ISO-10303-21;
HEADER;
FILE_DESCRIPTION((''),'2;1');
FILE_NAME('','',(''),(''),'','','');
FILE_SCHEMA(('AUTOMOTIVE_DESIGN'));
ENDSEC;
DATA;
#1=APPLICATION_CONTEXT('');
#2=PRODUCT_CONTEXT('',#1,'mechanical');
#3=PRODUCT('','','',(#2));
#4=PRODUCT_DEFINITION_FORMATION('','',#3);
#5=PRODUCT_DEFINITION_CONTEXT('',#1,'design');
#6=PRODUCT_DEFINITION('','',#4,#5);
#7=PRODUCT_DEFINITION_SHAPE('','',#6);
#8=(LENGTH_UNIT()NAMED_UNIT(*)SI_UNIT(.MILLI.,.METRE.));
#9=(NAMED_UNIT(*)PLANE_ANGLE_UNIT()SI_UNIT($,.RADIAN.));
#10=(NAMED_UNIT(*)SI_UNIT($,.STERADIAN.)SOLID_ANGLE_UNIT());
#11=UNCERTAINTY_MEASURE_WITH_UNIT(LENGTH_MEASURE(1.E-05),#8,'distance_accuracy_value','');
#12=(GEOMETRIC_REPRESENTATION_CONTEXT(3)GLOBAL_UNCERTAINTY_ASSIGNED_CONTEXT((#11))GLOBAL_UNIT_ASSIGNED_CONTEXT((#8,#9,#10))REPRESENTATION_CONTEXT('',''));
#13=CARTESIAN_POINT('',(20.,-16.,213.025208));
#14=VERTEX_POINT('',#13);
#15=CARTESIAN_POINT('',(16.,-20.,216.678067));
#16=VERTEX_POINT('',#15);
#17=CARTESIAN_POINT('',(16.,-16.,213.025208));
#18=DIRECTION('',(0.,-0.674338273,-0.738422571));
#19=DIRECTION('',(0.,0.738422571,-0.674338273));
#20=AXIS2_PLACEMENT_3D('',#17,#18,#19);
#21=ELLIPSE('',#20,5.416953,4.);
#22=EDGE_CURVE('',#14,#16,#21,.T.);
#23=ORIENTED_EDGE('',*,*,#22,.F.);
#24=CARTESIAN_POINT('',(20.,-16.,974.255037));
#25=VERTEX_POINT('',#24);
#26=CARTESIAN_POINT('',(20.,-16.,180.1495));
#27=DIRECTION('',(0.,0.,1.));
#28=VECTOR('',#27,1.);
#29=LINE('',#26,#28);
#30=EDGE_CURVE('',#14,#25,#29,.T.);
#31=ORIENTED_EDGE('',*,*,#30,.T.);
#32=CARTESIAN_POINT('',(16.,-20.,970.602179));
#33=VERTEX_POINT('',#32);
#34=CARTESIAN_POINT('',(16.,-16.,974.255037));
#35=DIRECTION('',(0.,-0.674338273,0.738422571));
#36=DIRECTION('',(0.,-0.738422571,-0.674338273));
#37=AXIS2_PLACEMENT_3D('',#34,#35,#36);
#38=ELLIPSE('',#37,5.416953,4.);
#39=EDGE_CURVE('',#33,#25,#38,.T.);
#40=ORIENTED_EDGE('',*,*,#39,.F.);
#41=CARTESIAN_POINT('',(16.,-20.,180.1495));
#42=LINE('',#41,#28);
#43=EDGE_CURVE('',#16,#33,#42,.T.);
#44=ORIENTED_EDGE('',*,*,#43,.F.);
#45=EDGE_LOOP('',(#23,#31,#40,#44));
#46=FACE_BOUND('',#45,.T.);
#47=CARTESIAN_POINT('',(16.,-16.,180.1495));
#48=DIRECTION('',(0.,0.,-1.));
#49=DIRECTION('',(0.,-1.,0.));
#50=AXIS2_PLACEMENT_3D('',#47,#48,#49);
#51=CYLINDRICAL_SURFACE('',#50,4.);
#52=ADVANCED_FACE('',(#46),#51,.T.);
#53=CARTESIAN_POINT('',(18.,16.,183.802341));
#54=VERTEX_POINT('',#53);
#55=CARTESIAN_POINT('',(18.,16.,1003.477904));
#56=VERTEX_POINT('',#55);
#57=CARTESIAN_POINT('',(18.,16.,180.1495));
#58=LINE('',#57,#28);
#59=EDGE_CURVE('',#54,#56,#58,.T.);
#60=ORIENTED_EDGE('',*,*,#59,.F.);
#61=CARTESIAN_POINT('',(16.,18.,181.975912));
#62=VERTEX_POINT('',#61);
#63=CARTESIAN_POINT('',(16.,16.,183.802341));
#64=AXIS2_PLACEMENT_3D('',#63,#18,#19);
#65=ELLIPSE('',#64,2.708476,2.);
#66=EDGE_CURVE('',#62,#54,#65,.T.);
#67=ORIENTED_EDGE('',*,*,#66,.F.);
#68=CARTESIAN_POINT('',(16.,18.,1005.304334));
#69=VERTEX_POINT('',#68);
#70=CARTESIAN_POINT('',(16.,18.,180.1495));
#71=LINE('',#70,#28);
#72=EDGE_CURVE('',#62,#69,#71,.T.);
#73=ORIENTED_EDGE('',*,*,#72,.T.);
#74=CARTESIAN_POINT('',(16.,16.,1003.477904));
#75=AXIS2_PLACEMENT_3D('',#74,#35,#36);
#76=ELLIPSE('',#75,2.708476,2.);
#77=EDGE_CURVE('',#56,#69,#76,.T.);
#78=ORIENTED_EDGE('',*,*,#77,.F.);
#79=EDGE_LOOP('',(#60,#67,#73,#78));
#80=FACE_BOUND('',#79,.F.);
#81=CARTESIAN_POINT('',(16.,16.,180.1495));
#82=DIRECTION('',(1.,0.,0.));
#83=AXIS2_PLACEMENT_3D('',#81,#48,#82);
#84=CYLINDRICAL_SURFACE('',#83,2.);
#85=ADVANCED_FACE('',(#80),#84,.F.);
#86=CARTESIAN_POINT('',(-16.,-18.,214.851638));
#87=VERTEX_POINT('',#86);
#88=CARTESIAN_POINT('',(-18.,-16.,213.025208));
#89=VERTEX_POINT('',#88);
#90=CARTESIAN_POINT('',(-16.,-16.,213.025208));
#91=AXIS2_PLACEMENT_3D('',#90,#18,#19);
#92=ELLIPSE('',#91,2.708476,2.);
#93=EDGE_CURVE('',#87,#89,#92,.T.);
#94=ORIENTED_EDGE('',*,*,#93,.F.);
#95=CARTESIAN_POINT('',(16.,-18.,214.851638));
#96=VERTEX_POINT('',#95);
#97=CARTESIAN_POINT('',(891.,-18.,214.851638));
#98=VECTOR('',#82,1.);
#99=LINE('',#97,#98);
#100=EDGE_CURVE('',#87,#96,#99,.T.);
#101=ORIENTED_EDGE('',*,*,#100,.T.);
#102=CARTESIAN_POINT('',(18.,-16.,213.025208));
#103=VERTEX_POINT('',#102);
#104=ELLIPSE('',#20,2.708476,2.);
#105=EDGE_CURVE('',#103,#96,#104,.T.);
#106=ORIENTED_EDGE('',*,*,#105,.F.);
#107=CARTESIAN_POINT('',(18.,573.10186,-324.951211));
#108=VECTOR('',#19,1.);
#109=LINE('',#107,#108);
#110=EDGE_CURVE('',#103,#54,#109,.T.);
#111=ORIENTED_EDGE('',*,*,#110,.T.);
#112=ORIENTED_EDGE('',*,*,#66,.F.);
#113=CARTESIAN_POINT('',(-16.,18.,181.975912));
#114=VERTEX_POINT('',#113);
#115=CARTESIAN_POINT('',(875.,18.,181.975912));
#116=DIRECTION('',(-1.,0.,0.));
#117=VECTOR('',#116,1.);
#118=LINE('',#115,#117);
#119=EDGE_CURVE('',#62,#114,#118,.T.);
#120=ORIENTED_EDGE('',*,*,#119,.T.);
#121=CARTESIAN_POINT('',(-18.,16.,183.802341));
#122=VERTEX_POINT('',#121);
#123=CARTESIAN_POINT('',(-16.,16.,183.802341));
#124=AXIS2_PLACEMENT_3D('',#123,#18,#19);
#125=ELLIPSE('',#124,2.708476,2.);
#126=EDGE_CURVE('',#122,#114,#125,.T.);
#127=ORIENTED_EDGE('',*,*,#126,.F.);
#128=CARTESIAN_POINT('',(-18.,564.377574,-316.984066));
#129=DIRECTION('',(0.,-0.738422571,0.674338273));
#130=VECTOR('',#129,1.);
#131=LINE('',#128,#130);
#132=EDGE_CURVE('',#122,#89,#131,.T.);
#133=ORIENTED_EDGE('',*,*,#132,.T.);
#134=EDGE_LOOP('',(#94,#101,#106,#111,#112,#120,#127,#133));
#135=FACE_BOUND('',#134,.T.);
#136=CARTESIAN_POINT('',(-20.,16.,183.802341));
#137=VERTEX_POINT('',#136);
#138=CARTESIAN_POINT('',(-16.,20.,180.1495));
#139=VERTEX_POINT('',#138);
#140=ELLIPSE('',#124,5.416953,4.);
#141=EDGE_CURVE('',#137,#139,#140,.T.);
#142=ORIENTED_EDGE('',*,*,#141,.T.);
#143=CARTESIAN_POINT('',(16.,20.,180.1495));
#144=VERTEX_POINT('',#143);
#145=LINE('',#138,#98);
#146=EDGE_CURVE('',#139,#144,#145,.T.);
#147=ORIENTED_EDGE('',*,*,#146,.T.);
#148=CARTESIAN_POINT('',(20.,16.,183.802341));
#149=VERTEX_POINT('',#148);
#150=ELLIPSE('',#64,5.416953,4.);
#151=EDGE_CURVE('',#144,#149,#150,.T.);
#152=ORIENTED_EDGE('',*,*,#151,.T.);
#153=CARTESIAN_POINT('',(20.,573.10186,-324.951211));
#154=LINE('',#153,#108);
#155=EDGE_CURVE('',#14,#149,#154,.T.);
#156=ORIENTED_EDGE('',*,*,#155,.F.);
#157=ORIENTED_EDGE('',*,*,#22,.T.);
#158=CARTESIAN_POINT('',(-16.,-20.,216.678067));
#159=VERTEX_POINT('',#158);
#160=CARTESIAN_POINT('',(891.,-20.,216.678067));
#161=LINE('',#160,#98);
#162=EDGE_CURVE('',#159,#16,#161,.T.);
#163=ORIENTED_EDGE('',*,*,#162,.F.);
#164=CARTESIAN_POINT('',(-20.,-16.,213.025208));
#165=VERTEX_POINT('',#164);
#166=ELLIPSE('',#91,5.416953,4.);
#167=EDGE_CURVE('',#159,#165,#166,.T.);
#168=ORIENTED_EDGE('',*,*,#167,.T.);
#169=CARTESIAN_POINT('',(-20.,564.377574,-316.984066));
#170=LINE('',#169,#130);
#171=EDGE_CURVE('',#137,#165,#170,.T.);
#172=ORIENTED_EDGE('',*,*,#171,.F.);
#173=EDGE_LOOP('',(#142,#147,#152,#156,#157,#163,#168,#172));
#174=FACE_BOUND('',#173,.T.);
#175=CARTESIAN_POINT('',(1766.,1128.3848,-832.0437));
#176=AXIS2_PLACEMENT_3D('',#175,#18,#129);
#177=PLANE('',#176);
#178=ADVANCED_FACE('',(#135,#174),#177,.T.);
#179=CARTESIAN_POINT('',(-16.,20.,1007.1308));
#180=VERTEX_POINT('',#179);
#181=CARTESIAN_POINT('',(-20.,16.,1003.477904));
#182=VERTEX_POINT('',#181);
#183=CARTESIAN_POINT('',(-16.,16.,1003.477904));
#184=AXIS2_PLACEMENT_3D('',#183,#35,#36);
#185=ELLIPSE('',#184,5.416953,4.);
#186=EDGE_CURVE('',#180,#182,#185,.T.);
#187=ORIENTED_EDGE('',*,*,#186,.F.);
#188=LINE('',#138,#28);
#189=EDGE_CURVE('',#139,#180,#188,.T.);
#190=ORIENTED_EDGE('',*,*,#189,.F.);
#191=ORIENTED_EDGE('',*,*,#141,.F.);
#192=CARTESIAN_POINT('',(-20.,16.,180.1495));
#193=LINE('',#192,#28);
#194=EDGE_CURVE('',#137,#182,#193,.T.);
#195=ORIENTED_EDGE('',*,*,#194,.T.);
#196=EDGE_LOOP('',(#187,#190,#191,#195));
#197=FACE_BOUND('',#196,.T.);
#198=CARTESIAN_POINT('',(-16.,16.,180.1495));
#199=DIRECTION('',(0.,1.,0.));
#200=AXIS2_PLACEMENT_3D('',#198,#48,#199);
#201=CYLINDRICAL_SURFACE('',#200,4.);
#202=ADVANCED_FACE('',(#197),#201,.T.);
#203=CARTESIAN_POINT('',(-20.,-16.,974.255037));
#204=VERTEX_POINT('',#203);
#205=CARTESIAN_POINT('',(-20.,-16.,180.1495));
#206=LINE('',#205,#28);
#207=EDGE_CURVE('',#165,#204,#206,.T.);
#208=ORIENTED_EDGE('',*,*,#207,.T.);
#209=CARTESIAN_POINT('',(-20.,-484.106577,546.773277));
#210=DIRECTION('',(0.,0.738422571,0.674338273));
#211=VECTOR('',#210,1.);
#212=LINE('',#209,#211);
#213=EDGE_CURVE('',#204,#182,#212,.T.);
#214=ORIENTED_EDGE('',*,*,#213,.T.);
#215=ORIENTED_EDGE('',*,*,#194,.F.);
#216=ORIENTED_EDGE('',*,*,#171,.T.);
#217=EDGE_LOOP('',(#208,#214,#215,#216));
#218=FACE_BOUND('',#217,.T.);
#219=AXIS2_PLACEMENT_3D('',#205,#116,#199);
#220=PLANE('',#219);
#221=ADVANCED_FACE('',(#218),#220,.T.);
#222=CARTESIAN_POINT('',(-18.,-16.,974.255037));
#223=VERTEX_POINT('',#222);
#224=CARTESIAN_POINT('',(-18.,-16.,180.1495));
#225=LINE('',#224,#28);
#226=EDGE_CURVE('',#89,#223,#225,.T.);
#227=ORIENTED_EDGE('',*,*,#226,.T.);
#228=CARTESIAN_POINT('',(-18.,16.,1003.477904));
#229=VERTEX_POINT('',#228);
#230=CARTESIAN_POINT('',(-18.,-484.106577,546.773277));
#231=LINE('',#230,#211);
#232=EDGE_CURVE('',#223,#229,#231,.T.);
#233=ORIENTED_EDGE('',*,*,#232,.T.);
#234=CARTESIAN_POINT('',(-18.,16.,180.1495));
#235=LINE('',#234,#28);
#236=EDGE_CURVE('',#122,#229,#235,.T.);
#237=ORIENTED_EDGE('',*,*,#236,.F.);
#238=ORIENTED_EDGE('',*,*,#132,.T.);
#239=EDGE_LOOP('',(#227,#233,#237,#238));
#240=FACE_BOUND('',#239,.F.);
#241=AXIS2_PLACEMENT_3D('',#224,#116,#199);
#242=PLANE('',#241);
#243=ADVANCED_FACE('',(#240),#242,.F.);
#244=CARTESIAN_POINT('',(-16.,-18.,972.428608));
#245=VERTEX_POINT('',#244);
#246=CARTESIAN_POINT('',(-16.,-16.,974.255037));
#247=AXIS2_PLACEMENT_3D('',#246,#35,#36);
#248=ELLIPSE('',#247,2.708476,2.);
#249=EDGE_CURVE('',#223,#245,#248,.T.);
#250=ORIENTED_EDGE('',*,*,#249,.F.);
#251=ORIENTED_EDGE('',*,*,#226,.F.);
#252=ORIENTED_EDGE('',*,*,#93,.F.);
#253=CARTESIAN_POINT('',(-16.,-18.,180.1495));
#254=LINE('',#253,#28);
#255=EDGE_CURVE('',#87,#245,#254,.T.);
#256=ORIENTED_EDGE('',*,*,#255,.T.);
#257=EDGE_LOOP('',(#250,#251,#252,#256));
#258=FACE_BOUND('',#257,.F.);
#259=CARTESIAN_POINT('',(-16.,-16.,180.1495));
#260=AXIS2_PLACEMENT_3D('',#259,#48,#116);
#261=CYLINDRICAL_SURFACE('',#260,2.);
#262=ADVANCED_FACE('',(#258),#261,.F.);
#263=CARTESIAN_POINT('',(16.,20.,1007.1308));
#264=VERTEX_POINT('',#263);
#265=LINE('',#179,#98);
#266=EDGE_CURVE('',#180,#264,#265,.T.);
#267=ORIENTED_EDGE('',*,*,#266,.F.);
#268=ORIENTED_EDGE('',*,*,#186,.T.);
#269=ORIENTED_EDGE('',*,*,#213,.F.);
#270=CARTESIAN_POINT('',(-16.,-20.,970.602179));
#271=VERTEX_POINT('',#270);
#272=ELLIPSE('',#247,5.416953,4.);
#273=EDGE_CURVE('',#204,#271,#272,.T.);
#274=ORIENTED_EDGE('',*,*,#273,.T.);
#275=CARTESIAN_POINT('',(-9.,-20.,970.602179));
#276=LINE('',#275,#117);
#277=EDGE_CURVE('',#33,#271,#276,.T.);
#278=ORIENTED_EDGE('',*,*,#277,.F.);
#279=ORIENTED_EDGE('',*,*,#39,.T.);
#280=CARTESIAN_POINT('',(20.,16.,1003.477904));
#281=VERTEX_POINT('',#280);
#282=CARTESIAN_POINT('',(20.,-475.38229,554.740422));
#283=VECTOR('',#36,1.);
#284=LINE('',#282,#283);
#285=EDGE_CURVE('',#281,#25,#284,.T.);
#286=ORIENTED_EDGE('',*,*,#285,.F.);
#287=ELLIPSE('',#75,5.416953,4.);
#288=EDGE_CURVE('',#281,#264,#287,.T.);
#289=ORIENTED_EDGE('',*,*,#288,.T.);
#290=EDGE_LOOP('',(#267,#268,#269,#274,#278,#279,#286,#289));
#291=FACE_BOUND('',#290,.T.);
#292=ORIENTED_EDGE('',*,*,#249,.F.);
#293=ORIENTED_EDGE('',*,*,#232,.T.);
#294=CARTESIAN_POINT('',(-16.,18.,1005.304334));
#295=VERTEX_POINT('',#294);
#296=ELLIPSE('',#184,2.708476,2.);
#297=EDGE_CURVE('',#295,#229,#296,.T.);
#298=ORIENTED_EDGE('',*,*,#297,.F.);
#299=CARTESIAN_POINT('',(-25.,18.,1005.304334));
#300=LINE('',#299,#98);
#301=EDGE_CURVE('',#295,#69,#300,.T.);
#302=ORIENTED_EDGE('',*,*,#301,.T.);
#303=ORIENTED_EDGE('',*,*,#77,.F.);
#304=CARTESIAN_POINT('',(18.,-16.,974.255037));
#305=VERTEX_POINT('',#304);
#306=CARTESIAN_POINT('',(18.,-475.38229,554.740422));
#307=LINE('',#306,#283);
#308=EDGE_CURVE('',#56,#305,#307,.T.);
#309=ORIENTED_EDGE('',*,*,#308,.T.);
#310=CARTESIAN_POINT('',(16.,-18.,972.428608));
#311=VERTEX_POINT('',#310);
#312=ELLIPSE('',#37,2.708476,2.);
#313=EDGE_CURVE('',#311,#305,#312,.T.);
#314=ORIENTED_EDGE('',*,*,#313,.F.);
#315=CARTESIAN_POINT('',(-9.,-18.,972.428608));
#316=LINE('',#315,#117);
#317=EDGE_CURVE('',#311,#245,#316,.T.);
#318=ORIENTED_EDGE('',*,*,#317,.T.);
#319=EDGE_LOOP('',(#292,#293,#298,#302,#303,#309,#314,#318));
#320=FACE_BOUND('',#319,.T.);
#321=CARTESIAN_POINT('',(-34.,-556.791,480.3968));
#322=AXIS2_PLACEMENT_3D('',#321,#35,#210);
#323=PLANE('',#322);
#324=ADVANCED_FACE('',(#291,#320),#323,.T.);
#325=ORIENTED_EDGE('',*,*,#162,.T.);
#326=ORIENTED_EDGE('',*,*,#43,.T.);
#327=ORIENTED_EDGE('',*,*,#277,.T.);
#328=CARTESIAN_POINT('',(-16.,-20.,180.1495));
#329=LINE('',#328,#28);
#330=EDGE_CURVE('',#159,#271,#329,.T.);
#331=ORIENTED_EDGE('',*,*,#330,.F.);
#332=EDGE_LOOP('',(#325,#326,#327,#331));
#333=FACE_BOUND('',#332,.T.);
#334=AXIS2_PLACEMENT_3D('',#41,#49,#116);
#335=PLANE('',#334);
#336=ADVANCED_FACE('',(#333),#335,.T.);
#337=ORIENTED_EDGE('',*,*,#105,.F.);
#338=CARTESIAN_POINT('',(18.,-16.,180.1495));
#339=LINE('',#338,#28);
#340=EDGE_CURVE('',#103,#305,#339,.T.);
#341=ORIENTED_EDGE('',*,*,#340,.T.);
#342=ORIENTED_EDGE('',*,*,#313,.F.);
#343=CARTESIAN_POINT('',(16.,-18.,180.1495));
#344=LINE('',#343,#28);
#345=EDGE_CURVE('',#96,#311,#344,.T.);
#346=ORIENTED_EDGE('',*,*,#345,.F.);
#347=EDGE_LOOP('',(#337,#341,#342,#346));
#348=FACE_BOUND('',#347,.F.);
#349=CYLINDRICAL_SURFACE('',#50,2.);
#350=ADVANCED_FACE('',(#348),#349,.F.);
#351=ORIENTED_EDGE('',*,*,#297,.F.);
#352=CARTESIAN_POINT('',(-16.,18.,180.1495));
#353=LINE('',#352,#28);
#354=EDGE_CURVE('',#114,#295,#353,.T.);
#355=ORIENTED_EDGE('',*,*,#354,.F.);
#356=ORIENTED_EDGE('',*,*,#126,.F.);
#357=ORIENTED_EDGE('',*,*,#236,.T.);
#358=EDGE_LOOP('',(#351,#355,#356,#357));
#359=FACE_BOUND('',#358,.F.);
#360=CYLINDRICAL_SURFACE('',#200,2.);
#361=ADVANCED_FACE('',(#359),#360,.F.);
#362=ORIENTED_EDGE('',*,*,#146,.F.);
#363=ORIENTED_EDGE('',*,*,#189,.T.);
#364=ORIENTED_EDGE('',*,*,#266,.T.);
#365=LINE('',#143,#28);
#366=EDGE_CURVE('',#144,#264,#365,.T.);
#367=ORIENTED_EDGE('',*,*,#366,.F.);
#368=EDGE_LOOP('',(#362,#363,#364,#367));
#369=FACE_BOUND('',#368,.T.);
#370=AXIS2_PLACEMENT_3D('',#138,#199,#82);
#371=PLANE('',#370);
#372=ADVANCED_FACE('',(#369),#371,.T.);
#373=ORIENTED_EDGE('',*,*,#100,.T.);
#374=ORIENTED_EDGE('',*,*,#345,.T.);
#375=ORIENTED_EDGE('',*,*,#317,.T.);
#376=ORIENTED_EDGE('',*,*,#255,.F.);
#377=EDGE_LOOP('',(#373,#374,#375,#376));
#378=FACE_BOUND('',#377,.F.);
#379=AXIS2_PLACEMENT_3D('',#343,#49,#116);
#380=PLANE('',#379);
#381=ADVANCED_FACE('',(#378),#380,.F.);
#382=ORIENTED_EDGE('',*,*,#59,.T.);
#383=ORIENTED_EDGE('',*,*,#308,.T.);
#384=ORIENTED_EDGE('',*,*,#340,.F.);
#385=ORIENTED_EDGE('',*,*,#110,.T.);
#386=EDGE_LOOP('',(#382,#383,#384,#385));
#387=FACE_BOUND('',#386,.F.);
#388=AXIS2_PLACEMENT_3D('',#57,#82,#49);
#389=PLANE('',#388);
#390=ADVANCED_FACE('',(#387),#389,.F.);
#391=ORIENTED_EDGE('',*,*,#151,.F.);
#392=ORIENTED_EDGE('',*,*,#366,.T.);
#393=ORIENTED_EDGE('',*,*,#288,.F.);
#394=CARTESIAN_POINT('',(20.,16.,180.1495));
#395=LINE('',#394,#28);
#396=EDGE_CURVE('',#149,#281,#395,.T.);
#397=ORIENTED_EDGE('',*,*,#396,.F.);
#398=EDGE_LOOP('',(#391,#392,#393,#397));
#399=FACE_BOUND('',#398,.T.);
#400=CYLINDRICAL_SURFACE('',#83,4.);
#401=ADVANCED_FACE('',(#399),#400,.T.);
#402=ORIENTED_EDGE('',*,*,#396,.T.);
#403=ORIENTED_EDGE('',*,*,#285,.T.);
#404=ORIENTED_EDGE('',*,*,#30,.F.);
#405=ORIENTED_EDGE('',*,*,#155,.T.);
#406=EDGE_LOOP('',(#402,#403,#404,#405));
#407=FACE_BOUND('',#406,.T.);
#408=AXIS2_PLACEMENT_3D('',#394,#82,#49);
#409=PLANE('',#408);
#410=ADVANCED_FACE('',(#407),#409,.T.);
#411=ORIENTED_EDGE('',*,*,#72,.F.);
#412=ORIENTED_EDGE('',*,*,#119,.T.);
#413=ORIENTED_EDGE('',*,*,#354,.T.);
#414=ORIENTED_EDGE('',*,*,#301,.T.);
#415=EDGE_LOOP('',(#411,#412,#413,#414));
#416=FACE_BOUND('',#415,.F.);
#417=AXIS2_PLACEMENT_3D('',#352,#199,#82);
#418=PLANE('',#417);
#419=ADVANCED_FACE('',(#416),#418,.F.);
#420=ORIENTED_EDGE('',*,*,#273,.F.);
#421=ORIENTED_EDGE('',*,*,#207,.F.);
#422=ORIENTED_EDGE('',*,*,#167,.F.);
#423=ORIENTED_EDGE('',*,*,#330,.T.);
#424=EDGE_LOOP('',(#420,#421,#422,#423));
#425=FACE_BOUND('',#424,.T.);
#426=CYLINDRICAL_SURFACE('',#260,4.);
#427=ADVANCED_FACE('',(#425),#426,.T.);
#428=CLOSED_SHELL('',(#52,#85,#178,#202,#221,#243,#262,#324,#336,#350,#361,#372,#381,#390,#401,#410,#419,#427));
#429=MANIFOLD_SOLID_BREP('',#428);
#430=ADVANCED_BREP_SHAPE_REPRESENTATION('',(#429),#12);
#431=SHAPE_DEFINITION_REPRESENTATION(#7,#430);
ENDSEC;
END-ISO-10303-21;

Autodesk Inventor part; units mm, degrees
ref_plane "Start Plane" through (0, 0, 180.1495) normal (0, 0, 1) x (1, 0, 0)
ref_plane "End Plane" through (0, 0, 1007.1308) normal (0, 0, 1) x (1, 0, 0)
sketch "Sketch" plane through (0, 0, 0) normal (0, 0, 1) x (1, 0, 0)
  line L0 (-20, -16) -> (-20, 16)
  line L1 (-16, 20) -> (16, 20)
  line L2 (20, 16) -> (20, -16)
  line L3 (16, -20) -> (-16, -20)
  arc A0 (-20, -16) -> (-16, -20) centre (-16, -16) ccw
  arc A1 (20, 16) -> (16, 20) centre (16, 16) ccw
  arc A2 (-16, 20) -> (-20, 16) centre (-16, 16) ccw
  arc A3 (16, -20) -> (20, -16) centre (16, -16) ccw
  arc A4 (-16, 18) -> (-18, 16) centre (-16, 16) ccw
  line L4 (-16, 18) -> (16, 18)
  arc A5 (18, 16) -> (16, 18) centre (16, 16) ccw
  line L5 (18, 16) -> (18, -16)
  arc A6 (16, -18) -> (18, -16) centre (16, -16) ccw
  line L6 (16, -18) -> (-16, -18)
  arc A7 (-18, -16) -> (-16, -18) centre (-16, -16) ccw
  line L7 (-18, -16) -> (-18, 16)
  line L8 (0, 29.1598) -> (0, -29.1598) construction
  line L9 (-29.1598, 0) -> (29.1598, 0) construction
  dimension "d7" = 4
  dimension "d9" = 40
  dimension "d11" = 40
  dimension "d12" = 2
  dimension "d15" = 20
  dimension "d16" = 20
extrude "Body" add sketch "Sketch" along normal up to surface (826.9813 mm away) from surface at 180.1495
sketch "Sketch3" plane through (0, 0, 0) normal (0, 0, 1) x (1, 0, 0)
  line L0 (0, 0) -> (10, 0)
ref_plane "Work Plane3" through (0, 0, 0) normal (0, -1, 0) x (1, 0, 0)
ref_plane "Work Plane4" through (1766, 1128.3848, -832.0437) normal (0, -0.6743383, -0.7384226) x (1, 0, 0)
split "Split1" plane through (1766, 1128.3848, -832.0437) removes the side toward (0, -0.6743383, -0.7384226)
ref_plane "Work Plane5" through (-34, -556.791, 480.3968) normal (0, -0.6743383, 0.7384226) x (1, 0, 0)
split "Split2" plane through (-34, -556.791, 480.3968) removes the side toward (0, -0.6743383, 0.7384226)
sketch "Sketch4" plane through (0, 0, 0) normal (0, -1, 0) x (1, 0, 0)
  line L0 (-2, 180.1495) -> (12, 180.1495) projected
  line L1 (-2, 1007.1308) -> (12, 1007.1308) projected
  dimension "d18" = 826.9813
equation "\"d7\" = G_IR"
equation "\"d9\" = G_W"
equation "\"d11\" = G_H"
equation "\"d12\" = G_T"
equation "\"d15\" = 0.5 * d9"
equation "\"d16\" = 0.5 * d11"
equation "\"d3\" = G_L"
equation "\"G_W\" = 40"
equation "\"G_H\" = 40"
equation "\"G_T\" = 2"
equation "\"G_IR\" = 4"
equation "\"G_L\" = d18"
equation "\"G_OFFSET_START\" = -180.14952"
equation "\"G_OFFSET_END\" = -71.81047"
equation "\"d13\" = -G_OFFSET_START"
equation "\"d14\" = G_OFFSET_END + B_L"
equation "\"B_L\" = 1078.94126"
properties part number "ISO 10799-2 - 40x40x2 - 826,98" material "Steel, Mild"
